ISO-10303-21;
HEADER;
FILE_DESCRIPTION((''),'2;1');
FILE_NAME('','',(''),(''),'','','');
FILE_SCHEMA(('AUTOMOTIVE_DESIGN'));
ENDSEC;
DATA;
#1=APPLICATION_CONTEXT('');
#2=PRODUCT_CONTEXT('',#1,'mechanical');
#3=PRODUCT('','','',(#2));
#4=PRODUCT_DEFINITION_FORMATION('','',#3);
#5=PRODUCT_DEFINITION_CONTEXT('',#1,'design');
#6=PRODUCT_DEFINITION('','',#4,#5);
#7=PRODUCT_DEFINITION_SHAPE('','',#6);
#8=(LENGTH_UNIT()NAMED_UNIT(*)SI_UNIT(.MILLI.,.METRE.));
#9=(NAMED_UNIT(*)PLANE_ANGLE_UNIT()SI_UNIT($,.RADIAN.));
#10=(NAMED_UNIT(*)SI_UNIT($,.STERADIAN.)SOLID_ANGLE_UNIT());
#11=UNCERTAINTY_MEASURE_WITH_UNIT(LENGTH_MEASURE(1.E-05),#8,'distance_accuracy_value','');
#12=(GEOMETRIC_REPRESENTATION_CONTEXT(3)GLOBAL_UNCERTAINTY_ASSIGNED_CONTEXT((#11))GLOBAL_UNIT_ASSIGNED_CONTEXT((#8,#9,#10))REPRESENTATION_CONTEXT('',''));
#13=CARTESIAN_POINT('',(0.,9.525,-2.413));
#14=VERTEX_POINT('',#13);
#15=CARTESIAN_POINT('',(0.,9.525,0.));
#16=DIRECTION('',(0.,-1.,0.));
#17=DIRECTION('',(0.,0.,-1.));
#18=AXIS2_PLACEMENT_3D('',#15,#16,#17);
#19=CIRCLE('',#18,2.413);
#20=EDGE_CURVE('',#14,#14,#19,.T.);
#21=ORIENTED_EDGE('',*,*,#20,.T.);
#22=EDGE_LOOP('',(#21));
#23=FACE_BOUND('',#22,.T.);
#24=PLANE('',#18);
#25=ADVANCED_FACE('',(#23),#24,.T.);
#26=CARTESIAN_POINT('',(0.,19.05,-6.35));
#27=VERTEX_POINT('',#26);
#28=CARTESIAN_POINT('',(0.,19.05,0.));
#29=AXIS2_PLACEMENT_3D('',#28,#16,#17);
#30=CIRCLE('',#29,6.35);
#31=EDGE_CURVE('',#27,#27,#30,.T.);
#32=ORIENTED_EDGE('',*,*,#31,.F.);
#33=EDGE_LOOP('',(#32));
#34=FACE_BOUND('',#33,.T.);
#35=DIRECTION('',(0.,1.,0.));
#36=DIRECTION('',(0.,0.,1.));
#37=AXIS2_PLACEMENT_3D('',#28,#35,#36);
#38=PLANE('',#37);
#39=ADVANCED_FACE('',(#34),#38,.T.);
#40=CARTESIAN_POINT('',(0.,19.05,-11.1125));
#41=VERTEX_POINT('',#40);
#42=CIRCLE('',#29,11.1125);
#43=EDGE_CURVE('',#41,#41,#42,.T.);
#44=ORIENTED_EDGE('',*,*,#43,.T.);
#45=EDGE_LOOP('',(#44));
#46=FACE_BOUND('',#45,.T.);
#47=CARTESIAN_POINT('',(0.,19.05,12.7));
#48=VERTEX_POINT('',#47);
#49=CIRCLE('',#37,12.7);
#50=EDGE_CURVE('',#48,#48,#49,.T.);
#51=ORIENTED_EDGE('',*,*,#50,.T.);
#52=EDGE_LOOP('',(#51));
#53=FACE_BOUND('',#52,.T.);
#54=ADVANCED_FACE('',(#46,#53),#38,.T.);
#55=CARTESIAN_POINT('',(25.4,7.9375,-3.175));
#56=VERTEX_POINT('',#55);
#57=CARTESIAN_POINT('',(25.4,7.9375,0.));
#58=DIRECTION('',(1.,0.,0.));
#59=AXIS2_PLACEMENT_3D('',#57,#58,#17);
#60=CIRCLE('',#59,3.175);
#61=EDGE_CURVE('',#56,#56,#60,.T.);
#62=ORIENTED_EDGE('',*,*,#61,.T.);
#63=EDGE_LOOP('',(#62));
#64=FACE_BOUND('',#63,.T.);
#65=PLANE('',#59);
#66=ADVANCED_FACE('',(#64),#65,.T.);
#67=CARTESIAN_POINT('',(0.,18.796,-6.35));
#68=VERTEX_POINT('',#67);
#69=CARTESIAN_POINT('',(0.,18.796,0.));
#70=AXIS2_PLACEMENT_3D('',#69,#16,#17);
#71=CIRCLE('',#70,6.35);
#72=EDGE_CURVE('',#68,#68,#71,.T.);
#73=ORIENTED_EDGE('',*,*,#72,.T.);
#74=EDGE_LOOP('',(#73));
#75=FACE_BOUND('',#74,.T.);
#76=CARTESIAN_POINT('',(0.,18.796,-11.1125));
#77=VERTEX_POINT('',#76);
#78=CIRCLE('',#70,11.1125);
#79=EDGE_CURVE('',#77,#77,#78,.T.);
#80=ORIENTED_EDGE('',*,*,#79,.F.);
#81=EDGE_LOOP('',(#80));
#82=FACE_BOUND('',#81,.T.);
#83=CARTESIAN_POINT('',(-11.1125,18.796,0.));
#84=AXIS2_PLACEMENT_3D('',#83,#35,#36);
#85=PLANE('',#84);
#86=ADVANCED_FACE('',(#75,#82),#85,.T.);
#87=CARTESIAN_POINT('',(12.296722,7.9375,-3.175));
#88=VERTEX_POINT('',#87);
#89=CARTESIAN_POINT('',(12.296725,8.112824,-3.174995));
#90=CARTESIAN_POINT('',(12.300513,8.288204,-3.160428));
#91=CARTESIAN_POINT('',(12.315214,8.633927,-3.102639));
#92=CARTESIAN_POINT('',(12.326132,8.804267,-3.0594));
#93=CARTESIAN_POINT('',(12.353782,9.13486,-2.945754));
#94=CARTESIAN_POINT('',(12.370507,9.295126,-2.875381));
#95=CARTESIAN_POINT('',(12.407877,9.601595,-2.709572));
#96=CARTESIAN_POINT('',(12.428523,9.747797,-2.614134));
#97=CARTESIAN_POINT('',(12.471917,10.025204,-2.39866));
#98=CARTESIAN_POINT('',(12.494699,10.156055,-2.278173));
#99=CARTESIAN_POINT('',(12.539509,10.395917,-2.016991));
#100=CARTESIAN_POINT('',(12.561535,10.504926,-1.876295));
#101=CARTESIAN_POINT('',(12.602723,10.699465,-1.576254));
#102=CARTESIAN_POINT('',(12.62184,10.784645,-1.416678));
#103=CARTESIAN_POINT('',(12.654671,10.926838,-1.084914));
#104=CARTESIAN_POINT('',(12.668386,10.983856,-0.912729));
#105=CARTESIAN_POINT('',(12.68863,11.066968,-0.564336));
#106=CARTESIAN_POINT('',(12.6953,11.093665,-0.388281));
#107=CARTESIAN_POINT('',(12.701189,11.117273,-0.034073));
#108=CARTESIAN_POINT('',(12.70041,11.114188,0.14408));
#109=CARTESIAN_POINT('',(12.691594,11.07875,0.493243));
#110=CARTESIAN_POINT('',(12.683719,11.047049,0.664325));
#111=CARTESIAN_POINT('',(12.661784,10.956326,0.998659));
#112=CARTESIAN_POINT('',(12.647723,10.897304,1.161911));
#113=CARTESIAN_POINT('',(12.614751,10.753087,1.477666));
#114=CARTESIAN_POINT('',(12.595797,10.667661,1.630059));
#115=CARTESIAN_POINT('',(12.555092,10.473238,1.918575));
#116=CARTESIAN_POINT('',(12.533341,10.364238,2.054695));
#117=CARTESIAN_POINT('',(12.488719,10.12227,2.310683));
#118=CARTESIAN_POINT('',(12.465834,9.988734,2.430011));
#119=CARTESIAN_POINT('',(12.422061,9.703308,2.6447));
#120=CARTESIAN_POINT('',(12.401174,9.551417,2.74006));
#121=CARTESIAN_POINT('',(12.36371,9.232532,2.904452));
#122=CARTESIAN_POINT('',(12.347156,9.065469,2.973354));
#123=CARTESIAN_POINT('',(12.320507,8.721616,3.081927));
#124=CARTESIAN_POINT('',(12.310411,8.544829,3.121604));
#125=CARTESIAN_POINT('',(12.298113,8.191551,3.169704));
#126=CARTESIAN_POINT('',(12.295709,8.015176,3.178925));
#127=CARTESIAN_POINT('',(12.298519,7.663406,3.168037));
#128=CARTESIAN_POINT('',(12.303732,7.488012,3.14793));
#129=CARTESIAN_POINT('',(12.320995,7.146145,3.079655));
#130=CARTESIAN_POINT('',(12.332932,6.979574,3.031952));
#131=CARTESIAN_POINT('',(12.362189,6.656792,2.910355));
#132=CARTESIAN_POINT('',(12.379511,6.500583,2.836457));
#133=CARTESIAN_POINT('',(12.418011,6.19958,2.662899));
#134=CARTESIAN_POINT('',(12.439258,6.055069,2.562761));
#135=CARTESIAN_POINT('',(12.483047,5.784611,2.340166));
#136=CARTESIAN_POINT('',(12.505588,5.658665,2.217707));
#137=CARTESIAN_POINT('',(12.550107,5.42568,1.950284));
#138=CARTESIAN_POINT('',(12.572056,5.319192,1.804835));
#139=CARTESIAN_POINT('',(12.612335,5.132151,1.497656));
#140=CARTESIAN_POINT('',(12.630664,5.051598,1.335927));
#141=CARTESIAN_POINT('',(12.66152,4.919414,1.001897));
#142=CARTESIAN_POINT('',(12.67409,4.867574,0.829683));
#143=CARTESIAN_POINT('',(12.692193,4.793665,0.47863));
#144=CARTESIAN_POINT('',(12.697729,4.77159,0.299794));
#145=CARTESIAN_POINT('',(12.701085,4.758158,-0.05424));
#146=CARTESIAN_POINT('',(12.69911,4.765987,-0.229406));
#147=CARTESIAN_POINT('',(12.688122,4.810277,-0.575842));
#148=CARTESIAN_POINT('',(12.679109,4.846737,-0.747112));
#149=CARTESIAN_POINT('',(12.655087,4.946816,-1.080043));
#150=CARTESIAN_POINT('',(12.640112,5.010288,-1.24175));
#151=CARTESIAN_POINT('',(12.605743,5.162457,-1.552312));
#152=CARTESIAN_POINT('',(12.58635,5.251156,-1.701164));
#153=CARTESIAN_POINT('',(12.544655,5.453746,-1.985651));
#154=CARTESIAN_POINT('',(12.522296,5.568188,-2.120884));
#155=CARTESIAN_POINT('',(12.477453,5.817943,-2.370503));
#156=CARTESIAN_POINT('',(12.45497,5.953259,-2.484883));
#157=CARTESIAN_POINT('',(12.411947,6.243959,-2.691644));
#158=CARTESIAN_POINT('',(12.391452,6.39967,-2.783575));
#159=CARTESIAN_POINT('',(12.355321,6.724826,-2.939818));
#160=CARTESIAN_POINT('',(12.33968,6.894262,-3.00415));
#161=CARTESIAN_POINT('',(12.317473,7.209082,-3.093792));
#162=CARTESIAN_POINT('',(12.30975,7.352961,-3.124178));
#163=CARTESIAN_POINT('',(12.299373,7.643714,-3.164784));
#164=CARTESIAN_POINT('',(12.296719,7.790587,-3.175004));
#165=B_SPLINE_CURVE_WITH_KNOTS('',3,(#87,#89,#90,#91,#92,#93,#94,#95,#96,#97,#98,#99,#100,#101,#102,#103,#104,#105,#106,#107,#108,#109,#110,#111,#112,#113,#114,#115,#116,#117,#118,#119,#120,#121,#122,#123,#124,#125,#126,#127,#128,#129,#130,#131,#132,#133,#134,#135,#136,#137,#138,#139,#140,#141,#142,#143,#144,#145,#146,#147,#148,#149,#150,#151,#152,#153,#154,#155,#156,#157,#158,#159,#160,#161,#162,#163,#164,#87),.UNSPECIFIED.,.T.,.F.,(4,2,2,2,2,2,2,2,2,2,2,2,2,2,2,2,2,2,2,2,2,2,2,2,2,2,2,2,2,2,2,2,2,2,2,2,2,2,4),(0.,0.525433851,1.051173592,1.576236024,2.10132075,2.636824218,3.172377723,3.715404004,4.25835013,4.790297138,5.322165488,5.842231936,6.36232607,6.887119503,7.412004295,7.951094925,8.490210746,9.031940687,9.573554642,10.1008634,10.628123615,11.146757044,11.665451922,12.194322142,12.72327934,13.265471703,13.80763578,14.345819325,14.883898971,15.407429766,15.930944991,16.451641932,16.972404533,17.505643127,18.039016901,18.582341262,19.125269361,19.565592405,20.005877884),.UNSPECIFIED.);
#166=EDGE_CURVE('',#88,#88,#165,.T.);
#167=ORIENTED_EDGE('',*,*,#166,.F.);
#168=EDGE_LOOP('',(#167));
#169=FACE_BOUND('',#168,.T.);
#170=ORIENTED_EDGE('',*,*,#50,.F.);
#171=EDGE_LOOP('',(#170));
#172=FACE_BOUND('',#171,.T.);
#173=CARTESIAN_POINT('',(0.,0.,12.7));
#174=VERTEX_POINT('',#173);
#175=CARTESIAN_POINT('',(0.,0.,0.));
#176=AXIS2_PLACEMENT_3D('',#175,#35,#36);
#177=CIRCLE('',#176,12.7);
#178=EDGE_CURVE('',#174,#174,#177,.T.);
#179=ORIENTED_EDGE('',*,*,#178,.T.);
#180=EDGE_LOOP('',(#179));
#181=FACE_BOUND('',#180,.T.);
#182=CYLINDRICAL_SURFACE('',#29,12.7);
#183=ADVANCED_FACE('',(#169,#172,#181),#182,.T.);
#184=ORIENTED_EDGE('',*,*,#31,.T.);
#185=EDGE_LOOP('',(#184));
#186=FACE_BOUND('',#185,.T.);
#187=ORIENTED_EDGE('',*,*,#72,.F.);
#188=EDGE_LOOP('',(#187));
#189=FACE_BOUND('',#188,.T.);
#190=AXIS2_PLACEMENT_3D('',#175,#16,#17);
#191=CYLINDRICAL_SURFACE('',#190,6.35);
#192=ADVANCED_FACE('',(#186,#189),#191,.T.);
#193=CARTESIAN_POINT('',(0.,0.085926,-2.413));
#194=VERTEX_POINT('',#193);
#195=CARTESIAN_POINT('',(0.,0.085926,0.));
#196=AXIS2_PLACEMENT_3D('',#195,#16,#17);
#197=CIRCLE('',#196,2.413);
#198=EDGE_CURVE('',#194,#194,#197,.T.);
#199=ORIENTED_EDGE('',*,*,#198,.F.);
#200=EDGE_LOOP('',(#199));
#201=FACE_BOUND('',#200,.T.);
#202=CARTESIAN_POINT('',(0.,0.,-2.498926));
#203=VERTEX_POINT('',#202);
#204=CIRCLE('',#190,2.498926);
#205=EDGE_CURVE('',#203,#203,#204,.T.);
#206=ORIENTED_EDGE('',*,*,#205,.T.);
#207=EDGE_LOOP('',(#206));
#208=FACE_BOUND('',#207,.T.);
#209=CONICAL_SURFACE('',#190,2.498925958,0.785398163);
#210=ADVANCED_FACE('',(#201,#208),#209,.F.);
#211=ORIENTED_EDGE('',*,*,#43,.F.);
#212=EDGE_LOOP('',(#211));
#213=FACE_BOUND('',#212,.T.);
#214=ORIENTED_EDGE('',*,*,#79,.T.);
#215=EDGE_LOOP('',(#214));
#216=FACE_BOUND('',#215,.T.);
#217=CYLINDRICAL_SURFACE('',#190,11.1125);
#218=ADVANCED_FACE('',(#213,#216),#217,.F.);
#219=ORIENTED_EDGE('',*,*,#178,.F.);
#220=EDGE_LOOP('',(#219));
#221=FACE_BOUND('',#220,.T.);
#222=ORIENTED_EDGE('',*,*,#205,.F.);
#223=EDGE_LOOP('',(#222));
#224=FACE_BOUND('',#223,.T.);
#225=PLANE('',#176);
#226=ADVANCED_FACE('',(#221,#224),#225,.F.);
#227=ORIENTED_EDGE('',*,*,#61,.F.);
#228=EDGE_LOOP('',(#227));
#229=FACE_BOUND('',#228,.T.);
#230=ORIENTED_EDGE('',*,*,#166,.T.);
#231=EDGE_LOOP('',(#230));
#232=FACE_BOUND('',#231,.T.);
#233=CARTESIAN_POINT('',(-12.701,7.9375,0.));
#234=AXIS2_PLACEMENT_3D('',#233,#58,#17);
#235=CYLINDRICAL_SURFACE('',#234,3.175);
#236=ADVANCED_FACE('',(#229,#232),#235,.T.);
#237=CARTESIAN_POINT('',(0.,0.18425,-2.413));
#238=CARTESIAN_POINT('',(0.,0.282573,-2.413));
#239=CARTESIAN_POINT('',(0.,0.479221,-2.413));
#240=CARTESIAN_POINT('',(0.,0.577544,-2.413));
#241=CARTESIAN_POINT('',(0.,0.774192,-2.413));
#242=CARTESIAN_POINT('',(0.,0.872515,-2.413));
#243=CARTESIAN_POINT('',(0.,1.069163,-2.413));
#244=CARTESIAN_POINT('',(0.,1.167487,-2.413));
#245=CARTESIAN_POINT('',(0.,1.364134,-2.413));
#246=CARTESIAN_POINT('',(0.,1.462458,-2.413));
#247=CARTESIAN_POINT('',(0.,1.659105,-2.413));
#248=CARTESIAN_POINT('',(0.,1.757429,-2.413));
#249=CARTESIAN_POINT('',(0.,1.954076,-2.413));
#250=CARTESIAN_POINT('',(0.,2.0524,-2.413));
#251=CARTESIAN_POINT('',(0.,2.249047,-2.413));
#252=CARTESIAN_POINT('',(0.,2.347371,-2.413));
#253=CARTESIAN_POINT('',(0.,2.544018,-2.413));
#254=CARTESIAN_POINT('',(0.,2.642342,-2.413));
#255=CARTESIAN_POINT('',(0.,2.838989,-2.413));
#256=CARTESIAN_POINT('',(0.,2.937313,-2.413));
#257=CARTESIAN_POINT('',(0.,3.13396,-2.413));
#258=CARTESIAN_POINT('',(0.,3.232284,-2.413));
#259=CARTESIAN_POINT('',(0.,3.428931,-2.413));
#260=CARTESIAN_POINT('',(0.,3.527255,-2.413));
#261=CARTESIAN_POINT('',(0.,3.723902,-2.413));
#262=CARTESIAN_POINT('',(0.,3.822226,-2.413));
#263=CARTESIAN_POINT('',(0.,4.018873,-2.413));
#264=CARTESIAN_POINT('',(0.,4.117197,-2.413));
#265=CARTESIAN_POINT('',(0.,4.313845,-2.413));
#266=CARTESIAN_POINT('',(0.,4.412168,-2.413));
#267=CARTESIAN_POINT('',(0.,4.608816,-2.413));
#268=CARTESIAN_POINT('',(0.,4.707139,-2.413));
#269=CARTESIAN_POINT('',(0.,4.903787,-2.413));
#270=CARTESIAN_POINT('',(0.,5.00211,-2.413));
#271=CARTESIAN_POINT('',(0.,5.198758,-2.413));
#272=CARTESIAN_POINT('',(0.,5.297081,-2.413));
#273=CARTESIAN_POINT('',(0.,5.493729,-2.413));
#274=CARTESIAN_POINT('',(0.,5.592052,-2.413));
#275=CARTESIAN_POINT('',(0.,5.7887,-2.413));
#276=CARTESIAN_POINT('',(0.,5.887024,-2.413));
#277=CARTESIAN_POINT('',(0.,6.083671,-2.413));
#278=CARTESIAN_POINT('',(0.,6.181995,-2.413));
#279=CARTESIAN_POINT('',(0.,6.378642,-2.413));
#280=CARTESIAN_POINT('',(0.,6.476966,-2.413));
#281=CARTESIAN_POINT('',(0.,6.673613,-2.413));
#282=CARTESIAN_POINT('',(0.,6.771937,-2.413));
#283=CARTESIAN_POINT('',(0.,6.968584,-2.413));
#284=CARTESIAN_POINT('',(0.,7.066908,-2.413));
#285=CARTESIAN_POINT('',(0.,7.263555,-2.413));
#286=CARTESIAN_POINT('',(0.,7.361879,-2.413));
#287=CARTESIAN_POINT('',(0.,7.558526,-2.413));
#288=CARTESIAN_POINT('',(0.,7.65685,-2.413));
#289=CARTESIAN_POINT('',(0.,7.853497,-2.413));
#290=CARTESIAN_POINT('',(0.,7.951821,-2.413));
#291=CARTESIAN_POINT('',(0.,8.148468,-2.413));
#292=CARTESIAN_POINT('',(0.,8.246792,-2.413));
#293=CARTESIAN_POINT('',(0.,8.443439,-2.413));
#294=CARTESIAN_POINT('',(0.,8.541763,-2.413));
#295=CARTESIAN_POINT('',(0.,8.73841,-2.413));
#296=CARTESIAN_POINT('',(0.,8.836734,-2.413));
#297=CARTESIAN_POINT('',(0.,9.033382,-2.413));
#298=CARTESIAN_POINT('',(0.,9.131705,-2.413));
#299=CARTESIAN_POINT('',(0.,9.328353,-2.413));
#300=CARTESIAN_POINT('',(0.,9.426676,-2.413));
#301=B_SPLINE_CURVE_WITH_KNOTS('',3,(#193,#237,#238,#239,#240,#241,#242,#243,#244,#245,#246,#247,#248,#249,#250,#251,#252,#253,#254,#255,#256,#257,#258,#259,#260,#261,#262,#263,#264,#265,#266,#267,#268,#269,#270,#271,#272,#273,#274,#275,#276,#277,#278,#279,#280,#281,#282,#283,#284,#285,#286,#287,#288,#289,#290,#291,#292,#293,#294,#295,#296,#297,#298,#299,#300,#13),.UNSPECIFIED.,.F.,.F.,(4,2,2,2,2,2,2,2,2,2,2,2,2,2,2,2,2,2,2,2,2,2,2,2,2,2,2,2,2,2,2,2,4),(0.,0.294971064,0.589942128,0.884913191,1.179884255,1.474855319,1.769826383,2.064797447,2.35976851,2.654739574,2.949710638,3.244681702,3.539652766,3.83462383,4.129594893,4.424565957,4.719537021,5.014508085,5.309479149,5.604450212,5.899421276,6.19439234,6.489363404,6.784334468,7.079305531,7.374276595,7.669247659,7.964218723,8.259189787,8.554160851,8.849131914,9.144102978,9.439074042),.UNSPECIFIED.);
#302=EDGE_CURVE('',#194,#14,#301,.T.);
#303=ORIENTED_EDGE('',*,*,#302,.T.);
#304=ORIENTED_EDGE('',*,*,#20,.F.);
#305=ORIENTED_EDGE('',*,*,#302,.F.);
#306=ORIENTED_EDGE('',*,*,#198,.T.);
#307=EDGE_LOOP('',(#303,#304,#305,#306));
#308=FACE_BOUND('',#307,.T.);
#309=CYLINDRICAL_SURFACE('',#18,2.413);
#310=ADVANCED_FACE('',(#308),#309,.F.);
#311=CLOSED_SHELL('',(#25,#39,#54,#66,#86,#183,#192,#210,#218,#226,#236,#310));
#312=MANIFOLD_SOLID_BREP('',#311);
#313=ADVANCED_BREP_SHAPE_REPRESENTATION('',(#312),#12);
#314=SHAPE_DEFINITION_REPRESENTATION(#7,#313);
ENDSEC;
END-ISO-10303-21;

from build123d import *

# Parameters (mm, degrees)
SKETCH1_R           = 12.7
BOSS_EXTRUDE1_DEPTH = 19.05
SKETCH2_W           = 4.7625
SKETCH2_H           = 0.254
SKETCH3_R           = 2.413
CUT_EXTRUDE1_DEPTH  = 9.525
BOSS_EXTRUDE2_START = 25.4
SKETCH7_R           = 3.175
BOSS_EXTRUDE2_DEPTH = 13.103277876


# Read off the part's stored shape, not the designer's step: Cut-Extrude2
with BuildPart() as part:
    # Sketch1 → Boss-Extrude1 (new body)
    with BuildSketch(Plane(origin=(0, 0, 0), x_dir=(1, 0, 0), z_dir=(0, 1, 0))):
        with Locations(Location((0, 0, 0), (0, 0, 90))):
            Circle(SKETCH1_R)
    extrude(amount=BOSS_EXTRUDE1_DEPTH)

    # Sketch2 → Cut-Revolve1 (revolve, cut)
    with BuildSketch(Plane.XY, mode=Mode.PRIVATE) as cut_revolve1_sk:
        with Locations((-8.73125, 18.923)):
            Rectangle(SKETCH2_W, SKETCH2_H)
    revolve(cut_revolve1_sk.sketch.rotate(Axis((0, 0, 0), (0, 1, 0)), 270), axis=Axis((0, 0, 0), (0, 1, 0)), mode=Mode.SUBTRACT)

    # Sketch3 → Cut-Extrude1 (cut)
    with BuildSketch(Plane.XZ):
        with Locations(Location((0, 0, 0), (0, 0, 270))):
            Circle(SKETCH3_R)
    extrude(amount=-CUT_EXTRUDE1_DEPTH, mode=Mode.SUBTRACT)

    # Cut-Extrude2 outline → Cut-Extrude2 (revolve, cut)
    with BuildSketch(Plane.XY):
        Polygon((2.498925958, 0), (2.413, 0.085925958), (2.413, 0), align=None)
    revolve(axis=Axis((0, 0, 0), (0, 1, 0)), mode=Mode.SUBTRACT)

    # Sketch7 → Boss-Extrude2 (add)
    with BuildSketch(Plane(origin=(0, 0, 0), x_dir=(0, 0, -1), z_dir=(1, 0, 0)).offset(BOSS_EXTRUDE2_START)):
        with Locations((0, 7.9375)):
            Circle(SKETCH7_R)
    extrude(amount=-BOSS_EXTRUDE2_DEPTH)


solid = part.part
